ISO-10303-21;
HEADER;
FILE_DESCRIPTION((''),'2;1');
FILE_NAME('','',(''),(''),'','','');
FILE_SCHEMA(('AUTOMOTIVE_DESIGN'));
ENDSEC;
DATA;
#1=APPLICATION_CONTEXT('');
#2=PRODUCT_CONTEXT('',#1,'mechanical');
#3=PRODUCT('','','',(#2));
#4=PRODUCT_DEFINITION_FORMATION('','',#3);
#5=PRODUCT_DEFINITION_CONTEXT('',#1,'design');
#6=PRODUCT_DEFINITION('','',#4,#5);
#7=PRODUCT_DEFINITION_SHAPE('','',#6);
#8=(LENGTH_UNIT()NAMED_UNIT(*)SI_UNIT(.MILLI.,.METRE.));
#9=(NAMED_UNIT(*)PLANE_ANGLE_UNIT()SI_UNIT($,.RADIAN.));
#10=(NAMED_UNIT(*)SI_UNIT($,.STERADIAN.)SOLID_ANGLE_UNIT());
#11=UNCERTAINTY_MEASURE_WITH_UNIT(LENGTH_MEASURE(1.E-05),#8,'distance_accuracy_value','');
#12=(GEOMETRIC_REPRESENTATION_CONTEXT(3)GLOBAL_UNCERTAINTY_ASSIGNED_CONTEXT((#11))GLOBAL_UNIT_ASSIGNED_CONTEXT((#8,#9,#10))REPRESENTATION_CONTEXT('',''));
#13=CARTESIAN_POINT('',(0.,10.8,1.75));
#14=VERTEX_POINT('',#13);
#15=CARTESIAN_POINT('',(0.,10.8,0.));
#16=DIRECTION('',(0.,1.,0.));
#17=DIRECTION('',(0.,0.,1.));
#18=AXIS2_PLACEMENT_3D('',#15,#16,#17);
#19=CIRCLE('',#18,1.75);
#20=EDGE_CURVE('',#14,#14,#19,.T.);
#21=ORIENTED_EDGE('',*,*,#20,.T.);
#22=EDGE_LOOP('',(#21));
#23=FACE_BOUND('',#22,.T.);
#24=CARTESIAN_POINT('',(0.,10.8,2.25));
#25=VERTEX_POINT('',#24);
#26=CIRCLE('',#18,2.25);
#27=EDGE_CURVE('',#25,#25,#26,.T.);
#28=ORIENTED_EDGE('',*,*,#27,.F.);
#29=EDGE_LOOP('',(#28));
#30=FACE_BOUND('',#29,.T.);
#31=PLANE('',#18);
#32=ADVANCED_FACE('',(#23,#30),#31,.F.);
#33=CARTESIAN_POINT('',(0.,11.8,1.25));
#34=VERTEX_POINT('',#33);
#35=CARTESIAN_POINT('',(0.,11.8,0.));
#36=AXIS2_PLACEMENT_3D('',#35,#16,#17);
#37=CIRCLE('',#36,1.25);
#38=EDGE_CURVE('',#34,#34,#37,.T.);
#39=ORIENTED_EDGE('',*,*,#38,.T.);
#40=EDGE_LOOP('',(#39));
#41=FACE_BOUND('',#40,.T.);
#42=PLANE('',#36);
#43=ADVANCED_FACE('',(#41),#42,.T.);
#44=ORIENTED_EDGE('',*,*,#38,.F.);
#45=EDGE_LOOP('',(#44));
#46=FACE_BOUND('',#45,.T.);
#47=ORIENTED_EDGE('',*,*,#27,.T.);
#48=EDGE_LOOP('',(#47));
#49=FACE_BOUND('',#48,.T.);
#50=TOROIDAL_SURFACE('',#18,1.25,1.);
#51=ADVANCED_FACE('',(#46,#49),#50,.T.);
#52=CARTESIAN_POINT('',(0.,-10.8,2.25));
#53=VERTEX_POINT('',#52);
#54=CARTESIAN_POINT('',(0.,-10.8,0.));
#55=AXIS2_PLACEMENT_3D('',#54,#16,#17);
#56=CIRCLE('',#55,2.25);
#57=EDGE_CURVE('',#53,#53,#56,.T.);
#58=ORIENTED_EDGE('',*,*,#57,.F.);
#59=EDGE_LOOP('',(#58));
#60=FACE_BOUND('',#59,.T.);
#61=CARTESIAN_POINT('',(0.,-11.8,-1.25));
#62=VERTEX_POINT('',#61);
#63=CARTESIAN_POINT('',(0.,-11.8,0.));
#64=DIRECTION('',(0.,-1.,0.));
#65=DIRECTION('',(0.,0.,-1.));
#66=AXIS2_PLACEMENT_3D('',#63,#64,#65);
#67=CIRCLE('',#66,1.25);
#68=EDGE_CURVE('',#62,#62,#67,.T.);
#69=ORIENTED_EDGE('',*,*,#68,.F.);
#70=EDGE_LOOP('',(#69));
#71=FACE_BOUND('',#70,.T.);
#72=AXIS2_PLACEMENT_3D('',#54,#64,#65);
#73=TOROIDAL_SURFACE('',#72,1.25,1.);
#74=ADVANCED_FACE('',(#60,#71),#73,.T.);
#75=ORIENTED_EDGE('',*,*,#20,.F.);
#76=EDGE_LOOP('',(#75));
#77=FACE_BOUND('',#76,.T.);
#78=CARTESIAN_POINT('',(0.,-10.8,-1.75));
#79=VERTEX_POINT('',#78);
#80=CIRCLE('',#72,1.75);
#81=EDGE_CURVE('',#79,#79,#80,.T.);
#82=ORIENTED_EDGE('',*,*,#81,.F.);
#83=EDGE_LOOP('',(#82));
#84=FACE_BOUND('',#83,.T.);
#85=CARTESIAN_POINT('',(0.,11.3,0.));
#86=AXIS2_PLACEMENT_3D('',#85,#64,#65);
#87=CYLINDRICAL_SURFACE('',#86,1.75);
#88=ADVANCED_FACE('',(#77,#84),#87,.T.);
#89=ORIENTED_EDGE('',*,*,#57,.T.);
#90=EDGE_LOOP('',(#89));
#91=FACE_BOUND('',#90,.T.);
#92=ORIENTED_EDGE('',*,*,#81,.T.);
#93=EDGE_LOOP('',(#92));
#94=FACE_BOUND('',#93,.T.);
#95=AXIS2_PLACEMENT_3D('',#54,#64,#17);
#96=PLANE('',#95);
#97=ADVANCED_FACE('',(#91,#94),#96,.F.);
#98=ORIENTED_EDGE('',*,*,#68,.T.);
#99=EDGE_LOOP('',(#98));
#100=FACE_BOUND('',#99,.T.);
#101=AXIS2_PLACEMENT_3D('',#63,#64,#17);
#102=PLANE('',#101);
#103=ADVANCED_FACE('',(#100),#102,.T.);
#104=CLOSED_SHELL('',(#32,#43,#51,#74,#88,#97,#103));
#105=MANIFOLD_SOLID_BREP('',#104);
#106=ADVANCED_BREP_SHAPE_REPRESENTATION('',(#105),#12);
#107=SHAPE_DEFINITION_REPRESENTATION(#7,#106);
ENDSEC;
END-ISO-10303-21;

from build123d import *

# Parameters (mm, degrees)
SKETCH1_R           = 1.75
BOSS_EXTRUDE1_DEPTH = 11.3
SKETCH2_R           = 2.25
BOSS_EXTRUDE2_DEPTH = 0.5
FILLET2_R           = 1


with BuildPart() as part:
    # Sketch1 → Boss-Extrude1 (new, symmetric)
    with BuildSketch(Plane(origin=(0, 0, 0), x_dir=(1, 0, 0), z_dir=(0, 1, 0))):
        with Locations(Location((0, 0, 0), (0, 0, 270))):
            Circle(SKETCH1_R)
    extrude(amount=BOSS_EXTRUDE1_DEPTH, both=True)

    # Sketch2 → Boss-Extrude2 (add, symmetric)
    with BuildSketch(Plane(origin=(0, 11.3, 0), x_dir=(1, 0, 0), z_dir=(0, 1, 0))):
        with Locations(Location((0, 0, 0), (0, 0, 270))):
            Circle(SKETCH2_R)
    boss_extrude2 = extrude(amount=BOSS_EXTRUDE2_DEPTH, both=True)

    # Mirror1: Boss-Extrude2 across plane
    add(boss_extrude2.mirror(Plane.ZX))

    # Fillet2
    fillet2_edges = [part.edges().sort_by_distance(p)[0] for p in [
        (0, -11.8, -2.25),
        (0, 11.8, -2.25),
    ]]
    fillet(fillet2_edges, radius=FILLET2_R - 0.0001)  # a hair under: the kernel refuses the full size


solid = part.part
